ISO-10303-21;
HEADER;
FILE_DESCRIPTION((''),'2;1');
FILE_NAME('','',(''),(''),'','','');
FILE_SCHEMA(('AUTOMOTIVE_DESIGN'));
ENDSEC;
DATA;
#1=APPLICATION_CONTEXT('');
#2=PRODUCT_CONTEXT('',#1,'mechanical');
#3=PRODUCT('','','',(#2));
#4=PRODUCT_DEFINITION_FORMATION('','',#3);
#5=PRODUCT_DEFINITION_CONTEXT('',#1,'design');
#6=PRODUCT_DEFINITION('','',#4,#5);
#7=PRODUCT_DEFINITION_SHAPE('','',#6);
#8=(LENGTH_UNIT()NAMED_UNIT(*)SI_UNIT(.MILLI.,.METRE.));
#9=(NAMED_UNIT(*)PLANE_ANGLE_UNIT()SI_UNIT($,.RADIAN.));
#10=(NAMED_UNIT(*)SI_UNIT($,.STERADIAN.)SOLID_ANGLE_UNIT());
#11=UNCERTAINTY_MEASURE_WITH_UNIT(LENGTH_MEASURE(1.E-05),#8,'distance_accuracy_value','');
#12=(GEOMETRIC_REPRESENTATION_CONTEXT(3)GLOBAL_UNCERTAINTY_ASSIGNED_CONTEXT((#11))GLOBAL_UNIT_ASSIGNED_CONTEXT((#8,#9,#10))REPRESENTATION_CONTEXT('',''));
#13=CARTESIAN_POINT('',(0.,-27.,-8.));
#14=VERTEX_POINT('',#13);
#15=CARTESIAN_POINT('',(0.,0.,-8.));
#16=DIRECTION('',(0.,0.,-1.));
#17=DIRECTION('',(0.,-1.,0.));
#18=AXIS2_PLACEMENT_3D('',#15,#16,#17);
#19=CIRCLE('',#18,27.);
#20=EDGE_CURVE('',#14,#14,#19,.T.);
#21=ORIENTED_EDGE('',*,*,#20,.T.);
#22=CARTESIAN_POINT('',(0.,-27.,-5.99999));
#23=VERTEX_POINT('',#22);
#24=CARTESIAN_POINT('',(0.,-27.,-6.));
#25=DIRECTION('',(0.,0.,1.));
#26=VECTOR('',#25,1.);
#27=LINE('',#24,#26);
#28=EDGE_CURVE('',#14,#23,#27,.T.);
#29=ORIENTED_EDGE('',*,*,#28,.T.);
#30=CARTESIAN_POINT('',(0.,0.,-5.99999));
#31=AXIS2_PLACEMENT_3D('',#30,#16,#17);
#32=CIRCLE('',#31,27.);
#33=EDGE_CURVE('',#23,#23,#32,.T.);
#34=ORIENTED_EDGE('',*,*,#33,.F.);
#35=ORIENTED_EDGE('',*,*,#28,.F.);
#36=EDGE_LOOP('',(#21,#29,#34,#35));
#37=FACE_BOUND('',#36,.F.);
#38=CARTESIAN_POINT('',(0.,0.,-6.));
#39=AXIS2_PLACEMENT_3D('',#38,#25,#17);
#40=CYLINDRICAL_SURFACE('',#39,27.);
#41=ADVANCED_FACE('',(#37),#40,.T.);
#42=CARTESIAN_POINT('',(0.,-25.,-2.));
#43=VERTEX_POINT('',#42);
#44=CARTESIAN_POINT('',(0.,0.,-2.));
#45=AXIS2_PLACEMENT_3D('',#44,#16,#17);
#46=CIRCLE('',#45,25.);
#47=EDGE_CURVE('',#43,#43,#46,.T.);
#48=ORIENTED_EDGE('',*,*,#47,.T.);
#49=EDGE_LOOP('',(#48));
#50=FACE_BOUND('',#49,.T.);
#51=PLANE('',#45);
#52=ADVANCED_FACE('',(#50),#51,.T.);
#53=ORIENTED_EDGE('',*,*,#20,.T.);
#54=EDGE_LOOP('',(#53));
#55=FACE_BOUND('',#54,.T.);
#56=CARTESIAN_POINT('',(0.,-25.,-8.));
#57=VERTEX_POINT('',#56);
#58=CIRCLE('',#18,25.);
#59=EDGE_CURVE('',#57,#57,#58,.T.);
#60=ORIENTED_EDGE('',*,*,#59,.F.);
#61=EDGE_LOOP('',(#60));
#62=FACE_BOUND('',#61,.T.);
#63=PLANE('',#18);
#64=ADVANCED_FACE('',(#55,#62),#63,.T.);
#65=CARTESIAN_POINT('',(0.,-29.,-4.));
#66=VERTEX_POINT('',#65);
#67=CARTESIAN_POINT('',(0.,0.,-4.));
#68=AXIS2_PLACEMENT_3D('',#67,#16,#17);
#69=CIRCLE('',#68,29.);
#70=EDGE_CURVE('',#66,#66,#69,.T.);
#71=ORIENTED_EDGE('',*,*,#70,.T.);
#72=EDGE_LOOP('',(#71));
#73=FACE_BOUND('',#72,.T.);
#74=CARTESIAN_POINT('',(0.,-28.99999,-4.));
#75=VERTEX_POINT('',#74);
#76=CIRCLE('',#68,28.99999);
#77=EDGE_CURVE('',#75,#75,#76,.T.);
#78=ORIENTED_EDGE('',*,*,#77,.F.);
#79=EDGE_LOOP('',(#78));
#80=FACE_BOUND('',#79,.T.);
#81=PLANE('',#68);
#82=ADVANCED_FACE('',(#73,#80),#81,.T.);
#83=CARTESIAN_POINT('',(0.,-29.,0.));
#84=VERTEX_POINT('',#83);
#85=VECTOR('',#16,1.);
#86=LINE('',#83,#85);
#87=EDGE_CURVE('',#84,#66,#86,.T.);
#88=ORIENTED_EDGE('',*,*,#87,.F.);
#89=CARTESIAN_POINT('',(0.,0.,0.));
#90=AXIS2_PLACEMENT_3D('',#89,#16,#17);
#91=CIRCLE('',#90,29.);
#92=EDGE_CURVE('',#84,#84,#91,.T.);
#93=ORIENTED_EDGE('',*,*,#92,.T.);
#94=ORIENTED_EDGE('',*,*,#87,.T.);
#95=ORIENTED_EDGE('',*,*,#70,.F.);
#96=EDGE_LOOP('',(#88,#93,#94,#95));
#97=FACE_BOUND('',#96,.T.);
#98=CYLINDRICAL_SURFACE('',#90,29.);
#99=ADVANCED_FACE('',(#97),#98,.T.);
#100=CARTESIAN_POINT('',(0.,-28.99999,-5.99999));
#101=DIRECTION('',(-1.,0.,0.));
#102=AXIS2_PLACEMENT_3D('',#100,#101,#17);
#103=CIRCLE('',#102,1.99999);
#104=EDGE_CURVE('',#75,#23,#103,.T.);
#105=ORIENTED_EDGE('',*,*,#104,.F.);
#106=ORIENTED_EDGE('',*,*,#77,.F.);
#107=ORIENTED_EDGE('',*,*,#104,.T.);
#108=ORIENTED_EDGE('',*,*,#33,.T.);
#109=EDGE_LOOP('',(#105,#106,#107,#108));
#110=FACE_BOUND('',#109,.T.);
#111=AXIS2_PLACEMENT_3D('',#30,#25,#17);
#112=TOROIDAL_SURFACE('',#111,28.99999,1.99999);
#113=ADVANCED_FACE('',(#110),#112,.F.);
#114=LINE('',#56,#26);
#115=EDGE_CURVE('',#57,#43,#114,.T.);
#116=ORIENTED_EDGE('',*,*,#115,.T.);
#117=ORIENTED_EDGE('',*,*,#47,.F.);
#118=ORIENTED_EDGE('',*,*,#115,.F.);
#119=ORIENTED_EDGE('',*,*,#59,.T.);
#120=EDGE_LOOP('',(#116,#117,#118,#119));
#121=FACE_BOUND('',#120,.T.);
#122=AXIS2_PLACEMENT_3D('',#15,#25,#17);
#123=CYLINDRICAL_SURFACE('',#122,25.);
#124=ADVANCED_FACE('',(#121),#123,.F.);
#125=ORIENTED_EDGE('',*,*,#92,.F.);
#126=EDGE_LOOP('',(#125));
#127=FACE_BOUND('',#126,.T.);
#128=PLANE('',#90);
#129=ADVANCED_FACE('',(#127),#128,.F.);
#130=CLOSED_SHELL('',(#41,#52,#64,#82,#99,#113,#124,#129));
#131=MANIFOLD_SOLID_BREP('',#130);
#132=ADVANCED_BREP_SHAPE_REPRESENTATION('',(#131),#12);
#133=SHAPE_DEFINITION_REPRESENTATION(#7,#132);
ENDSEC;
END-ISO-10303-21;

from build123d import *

# Parameters (mm, degrees)
F0_W   = 25
F0_H   = 2
F0_W_2 = 2
F0_H_2 = 4
F2_R   = 1.99999


# Not quite as in the source:
# - a fillet or chamfer is up to 0.001 mm smaller than in the source, because OpenCascade refuses the exact size


with BuildPart() as f1:
    # F0 (on Right) → F1 (revolve)
    with BuildSketch(Plane.YZ):
        with Locations((-12.5, -1)):
            Rectangle(F0_W, F0_H)
        Polygon((-27, -4), (-25, -4), (-25, -2), (-25, 0), (-29, 0), (-29, -4), align=None)
        with Locations((-26, -6)):
            Rectangle(F0_W_2, F0_H_2)
    revolve(axis=Axis((0, 0, -1), (0, 0, -1)))

    # F2 (radius 2 in the source; OpenCascade refuses exactly that, so slightly less here)
    f2_edges = [f1.edges().sort_by_distance(p)[0] for p in [
        (0, 27, -4),
    ]]
    fillet(f2_edges, radius=F2_R)


solid = f1.part
